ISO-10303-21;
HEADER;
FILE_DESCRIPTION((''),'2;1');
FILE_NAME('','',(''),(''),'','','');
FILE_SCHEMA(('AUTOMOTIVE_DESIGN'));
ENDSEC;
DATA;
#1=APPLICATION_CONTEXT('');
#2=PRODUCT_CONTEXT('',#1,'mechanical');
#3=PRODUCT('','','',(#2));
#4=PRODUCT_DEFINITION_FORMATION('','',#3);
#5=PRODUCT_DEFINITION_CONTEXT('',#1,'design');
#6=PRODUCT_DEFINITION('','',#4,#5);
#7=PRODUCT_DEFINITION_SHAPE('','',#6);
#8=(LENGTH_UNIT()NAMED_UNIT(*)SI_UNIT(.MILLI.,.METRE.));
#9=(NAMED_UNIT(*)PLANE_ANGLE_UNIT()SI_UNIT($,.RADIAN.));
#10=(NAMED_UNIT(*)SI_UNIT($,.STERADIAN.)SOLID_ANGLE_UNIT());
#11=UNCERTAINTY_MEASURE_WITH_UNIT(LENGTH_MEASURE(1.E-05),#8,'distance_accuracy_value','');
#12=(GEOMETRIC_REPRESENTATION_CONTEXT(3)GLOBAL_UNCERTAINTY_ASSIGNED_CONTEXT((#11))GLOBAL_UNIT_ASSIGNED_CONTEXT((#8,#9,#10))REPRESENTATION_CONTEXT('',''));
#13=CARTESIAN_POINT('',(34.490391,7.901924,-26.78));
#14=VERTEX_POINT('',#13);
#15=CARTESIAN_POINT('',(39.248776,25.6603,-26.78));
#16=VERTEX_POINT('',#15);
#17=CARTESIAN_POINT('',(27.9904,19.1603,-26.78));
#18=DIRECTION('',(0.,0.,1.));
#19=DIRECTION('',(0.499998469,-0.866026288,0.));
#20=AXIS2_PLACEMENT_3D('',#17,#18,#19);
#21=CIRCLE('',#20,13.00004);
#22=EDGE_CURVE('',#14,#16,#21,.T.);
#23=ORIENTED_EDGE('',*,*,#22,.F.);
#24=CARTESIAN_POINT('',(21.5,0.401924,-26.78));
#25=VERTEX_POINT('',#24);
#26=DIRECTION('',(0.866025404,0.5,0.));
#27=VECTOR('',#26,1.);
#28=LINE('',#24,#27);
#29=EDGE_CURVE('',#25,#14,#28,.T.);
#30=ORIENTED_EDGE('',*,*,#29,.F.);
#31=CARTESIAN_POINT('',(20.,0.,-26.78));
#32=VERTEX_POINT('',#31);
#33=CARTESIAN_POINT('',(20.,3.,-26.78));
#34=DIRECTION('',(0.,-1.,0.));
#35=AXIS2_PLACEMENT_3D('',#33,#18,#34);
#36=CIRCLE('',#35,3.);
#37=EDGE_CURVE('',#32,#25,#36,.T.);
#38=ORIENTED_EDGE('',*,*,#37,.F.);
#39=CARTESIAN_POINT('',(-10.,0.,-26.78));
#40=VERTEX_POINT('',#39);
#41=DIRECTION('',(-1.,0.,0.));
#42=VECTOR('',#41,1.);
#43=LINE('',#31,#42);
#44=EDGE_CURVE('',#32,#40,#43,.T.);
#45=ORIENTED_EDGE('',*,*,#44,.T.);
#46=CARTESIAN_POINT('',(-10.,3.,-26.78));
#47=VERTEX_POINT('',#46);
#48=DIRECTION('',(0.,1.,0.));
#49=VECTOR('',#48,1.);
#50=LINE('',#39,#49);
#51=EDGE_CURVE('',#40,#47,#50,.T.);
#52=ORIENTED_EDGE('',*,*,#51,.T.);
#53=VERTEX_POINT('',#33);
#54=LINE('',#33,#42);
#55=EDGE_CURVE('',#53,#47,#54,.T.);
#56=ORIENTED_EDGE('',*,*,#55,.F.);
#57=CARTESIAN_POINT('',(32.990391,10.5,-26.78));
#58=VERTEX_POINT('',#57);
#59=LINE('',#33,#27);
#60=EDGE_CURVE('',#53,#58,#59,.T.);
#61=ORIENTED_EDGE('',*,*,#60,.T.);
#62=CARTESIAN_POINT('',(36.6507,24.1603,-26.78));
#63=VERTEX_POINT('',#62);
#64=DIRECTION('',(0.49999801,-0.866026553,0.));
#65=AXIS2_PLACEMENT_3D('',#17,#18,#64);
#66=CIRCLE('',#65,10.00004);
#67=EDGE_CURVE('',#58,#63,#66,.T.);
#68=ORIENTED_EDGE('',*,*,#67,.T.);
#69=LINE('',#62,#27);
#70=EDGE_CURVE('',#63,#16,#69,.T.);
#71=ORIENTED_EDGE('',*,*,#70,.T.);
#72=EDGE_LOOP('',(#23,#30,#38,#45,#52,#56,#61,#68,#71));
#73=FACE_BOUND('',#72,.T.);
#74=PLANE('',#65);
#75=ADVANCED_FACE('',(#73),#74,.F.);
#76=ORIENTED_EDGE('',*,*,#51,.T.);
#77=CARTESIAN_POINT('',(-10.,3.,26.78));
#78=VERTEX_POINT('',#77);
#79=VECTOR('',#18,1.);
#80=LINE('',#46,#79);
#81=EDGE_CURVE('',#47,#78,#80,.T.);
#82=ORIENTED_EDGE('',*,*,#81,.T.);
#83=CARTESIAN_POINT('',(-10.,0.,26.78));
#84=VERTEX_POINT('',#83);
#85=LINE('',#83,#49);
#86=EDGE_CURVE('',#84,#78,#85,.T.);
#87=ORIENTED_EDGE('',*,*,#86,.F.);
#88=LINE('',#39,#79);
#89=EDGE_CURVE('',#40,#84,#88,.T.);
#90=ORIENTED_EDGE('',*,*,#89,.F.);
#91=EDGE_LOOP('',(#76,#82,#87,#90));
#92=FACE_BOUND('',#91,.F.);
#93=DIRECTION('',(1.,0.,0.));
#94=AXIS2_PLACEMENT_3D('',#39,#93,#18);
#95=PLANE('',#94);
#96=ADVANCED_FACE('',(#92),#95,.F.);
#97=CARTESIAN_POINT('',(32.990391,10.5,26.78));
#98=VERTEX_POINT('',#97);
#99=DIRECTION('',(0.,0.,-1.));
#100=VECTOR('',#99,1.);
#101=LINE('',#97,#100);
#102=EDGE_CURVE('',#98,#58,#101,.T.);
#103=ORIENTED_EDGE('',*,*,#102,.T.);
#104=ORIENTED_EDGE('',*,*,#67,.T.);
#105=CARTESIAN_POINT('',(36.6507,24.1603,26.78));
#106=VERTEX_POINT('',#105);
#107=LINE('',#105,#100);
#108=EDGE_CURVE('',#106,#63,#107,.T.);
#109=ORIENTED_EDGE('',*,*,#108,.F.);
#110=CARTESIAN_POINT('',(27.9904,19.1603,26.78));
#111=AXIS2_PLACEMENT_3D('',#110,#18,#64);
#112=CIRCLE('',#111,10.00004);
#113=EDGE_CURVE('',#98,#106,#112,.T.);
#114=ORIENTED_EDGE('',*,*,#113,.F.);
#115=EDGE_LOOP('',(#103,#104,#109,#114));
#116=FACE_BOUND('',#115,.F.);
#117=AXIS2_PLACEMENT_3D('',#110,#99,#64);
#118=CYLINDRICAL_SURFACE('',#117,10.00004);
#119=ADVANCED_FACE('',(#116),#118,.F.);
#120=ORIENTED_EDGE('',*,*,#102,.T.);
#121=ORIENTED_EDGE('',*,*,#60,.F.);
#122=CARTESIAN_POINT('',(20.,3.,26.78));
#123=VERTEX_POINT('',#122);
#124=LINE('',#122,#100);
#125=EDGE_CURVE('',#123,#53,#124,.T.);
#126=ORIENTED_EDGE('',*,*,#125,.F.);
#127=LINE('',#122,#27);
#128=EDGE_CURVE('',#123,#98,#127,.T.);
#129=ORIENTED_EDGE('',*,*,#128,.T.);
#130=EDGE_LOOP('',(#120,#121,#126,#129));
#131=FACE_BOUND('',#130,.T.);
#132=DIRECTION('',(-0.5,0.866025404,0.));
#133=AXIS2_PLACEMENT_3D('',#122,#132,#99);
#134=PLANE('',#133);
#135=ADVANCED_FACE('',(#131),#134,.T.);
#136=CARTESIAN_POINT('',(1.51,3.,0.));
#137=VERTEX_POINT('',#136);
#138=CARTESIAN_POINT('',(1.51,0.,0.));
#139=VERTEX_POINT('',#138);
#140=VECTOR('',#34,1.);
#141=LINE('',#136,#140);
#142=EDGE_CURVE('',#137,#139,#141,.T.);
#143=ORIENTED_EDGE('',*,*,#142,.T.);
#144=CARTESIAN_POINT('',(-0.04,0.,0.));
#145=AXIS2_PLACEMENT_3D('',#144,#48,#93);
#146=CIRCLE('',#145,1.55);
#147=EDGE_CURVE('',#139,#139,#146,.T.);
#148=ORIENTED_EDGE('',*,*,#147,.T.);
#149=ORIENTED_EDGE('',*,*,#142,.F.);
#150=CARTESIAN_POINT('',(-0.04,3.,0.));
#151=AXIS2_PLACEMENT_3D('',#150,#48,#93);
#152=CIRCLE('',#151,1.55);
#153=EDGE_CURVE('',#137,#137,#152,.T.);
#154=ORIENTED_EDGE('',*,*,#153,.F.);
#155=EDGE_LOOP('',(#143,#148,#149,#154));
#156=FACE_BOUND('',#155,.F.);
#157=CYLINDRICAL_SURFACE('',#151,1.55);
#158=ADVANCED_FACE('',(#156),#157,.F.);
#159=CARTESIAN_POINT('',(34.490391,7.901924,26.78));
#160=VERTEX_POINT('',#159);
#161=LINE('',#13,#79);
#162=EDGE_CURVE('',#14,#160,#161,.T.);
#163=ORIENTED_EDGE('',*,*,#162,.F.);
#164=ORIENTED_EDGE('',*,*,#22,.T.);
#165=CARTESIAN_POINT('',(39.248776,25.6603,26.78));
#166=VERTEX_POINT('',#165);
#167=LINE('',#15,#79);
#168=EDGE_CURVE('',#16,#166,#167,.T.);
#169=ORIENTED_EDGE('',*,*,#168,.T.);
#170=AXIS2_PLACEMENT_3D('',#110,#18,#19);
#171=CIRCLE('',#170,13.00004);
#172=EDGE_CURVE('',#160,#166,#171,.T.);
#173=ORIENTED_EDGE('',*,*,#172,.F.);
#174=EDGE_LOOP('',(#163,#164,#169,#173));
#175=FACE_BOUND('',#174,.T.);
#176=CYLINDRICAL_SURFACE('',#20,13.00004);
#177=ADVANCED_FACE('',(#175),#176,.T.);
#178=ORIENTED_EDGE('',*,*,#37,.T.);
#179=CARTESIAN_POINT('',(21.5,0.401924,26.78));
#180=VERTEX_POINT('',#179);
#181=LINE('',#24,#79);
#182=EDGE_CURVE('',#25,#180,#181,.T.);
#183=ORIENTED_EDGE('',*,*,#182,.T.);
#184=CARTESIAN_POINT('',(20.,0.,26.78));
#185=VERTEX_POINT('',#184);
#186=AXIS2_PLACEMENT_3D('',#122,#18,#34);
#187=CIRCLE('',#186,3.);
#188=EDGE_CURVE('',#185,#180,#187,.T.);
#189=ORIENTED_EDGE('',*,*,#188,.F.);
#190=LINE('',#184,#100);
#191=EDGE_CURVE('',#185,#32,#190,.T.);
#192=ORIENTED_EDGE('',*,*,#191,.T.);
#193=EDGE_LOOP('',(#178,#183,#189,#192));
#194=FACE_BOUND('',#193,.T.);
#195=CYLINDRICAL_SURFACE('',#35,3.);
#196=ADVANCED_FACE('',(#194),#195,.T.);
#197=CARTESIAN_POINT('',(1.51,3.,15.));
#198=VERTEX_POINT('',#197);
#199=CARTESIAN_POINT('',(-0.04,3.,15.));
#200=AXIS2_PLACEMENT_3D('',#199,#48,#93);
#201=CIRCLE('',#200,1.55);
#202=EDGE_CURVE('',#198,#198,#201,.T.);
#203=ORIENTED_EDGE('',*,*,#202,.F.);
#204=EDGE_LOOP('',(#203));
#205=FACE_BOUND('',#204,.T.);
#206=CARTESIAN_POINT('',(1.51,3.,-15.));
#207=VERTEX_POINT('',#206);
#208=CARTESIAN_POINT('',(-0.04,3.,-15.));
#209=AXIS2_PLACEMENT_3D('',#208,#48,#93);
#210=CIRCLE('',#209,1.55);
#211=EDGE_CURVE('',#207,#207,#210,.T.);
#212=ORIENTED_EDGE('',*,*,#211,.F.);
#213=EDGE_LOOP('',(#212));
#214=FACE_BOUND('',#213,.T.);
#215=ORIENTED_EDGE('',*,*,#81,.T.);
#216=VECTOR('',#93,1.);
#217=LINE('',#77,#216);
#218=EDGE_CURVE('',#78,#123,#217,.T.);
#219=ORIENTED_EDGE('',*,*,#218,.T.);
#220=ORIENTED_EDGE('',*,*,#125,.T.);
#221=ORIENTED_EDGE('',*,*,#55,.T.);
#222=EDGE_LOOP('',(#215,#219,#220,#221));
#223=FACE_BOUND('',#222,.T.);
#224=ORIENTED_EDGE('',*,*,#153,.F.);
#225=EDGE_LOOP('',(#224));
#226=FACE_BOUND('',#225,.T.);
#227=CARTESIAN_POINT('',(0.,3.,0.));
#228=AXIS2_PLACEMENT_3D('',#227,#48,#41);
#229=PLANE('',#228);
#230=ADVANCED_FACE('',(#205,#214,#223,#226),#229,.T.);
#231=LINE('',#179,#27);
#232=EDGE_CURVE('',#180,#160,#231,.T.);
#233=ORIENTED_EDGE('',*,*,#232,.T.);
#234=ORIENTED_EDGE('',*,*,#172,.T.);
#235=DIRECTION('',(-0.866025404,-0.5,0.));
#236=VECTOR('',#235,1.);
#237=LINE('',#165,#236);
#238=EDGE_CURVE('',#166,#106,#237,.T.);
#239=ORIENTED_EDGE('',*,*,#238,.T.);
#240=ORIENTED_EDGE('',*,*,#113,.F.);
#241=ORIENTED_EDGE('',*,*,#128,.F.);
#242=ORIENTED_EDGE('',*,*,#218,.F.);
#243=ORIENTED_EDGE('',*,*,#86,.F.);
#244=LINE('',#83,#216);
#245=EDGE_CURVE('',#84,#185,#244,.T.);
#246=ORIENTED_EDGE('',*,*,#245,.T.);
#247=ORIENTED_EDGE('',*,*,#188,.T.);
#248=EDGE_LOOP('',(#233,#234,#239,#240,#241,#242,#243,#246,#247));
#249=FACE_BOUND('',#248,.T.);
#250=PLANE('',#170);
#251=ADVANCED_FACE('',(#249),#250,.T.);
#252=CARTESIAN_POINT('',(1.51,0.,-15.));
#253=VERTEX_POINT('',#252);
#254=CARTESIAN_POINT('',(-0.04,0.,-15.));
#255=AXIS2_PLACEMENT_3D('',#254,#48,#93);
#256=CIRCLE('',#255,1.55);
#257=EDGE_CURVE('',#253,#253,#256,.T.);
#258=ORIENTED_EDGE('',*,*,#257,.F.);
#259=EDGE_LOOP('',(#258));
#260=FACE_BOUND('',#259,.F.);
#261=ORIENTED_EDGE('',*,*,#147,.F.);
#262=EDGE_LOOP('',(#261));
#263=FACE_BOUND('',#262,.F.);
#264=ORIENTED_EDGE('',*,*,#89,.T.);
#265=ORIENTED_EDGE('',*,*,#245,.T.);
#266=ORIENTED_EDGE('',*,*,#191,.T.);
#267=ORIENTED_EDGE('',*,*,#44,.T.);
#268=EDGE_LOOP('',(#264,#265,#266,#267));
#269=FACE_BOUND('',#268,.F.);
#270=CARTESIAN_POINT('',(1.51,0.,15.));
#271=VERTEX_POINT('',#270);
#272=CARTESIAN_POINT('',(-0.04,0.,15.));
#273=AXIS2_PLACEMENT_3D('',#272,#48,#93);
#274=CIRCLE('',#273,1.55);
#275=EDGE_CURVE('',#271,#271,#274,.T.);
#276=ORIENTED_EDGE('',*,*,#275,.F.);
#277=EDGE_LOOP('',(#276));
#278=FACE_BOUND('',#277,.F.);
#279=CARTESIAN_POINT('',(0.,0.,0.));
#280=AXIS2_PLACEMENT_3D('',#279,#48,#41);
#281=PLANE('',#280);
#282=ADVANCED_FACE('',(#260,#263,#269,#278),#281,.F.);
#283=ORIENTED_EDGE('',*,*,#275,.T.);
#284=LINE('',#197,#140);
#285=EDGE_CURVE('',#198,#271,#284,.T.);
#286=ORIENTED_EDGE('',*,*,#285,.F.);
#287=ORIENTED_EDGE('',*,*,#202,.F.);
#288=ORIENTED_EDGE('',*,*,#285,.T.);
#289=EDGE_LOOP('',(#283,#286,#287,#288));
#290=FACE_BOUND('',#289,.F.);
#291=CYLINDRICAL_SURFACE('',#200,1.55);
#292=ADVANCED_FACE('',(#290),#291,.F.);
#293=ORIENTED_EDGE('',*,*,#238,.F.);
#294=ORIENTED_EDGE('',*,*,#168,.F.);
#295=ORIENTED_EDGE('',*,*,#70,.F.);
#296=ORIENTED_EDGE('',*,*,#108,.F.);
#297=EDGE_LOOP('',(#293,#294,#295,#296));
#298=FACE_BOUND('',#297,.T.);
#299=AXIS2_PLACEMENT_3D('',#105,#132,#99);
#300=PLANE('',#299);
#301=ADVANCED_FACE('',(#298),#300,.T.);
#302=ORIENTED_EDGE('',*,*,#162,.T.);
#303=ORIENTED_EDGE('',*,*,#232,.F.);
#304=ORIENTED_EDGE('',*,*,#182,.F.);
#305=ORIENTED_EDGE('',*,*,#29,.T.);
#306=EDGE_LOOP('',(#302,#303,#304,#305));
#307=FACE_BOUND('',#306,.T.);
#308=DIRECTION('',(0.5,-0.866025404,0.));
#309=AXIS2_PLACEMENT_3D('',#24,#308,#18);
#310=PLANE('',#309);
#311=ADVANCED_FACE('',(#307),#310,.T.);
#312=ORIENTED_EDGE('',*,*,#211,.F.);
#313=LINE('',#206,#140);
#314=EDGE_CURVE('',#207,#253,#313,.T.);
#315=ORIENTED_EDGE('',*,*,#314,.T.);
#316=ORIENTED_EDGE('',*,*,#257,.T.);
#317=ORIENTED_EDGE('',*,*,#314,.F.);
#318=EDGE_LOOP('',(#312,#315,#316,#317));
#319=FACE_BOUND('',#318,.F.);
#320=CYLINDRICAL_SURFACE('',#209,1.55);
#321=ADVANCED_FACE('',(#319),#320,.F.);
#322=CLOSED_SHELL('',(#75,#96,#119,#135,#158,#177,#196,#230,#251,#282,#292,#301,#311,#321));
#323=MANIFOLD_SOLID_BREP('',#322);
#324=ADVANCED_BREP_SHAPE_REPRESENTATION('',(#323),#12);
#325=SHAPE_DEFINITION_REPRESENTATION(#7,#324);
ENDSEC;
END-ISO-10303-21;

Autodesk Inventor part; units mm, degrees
ref_plane "YZ Plane" through (0, 0, 0) normal (1, 0, 0) x (0, 1, 0)
ref_plane "XZ Plane" through (0, 0, 0) normal (0, 1, 0) x (-1, 0, 0)
ref_plane "XY Plane" through (0, 0, 0) normal (0, 0, 1) x (1, 0, 0)
sketch "Sketch1" plane through (0, 0, 0) normal (0, 1, 0) x (-1, 0, 0)
  line L0 (10, 26.78) -> (-20, 26.78)
  line L1 (-20, 26.78) -> (-20, -26.78)
  line L2 (-20, -26.78) -> (10, -26.78)
  line L3 (10, -26.78) -> (10, 26.78)
  point P0 (0, 0)
  dimension "d0" = 53.56
  dimension "d1" = 30
  dimension "d2" = 10
  dimension "d3" = 26.78
extrude "Extrusion1" add sketch "Sketch1" along normal blind 3
sketch "Sketch2" plane through (0, 3, 0) normal (0, 1, 0) x (1, 0, 0)
  circle A0 centre (-0.04, 0) radius 1.55
  line L0 (20, -26.78) -> (20, 26.78) projected
  circle A1 centre (-0.04, -15) radius 1.55
  circle A2 centre (-0.04, 15) radius 1.55
  point P0 (0, 0)
  point P1 (20, 0)
  dimension "d6" = 3.1
  dimension "d7" = 20.04
  dimension "d8" = 0
  dimension "d9" = 3.1
  dimension "d10" = 20.04
  dimension "d11" = 15
  dimension "d12" = 3.1
  dimension "d13" = 20.04
  dimension "d14" = 15
extrude "Extrusion2" cut sketch "Sketch2" against normal blind 3
sketch "Sketch3" plane through (0, 3, 0) normal (0, 1, 0) x (1, 0, 0)
  point P0 (0, 0)
sketch "Sketch4" plane through (20, 0, 26.78) normal (1, 0, 0) x (0, 0, -1)
  line L0 (0, 3) -> (53.56, 3)
  line L1 (53.56, 3) -> (53.56, 0)
  line L2 (53.56, 0) -> (0, 0)
  line L3 (0, 0) -> (0, 3)
  line L4 (0, 3) -> (53.56, 3) projected
  line L5 (0, 0) -> (0, 3) projected
  point P0 (26.78, 0)
  dimension "d17" = 3
  dimension "d18" = 53.56
  dimension "d19" = 0
  dimension "d20" = 0
revolve "Revolution2" add sketch "Sketch4" angle 30 about axis through (20, 3, 26.78) along (0, 0, 1)
sketch "Sketch6" plane through (20, 3, 26.78) normal (0.8660254, 0.5, 0) x (0, 0, -1)
  line L0 (0, 0) -> (53.56, 0)
  line L1 (53.56, 0) -> (53.56, -3)
  line L2 (53.56, -3) -> (0, -3)
  line L3 (0, -3) -> (0, 0)
  line L4 (0, 0) -> (53.56, 0) projected
  line L5 (0, 0) -> (0, -3) projected
  point P0 (26.78, 7.4019)
  dimension "d26" = 53.56
  dimension "d27" = 3
  dimension "d28" = 0
  dimension "d29" = 0
extrude "Extrusion3" add sketch "Sketch6" along normal blind 15
sketch "Sketch7" plane through (32.9904, 10.5, 26.78) normal (0.8660254, 0.5, 0) x (0, 0, -1)
  line L0 (0, 0) -> (53.56, 0)
  line L1 (53.56, 0) -> (53.56, -3)
  line L2 (53.56, -3) -> (0, -3)
  line L3 (0, -3) -> (0, 0)
  line L4 (0, -3) -> (53.56, -3) projected
  line L5 (0, 0) -> (0, -3) projected
  point P0 (26.78, 7.4019)
  dimension "d32" = 53.56
  dimension "d33" = 3
  dimension "d34" = 0
  dimension "d35" = 0
sketch "Sketch8" plane through (32.9904, 10.5, 26.78) normal (0.8660254, 0.5, 0) x (0, 0, -1)
  line L0 (-5.6464, 10) -> (58.6102, 10)
  line L1 (58.6102, 10) -> (58.6102, -7.2897)
  line L2 (58.6102, -7.2897) -> (-5.6464, -7.2897)
  line L3 (-5.6464, -7.2897) -> (-5.6464, 10)
  line L4 (53.56, 0) -> (0, 0) projected
  line L5 (53.56, -3) -> (53.56, 0) projected
  point P0 (26.78, 7.4019)
  dimension "d38" = 64.2566
  dimension "d39" = 17.2897
  dimension "d40" = 10
  dimension "d41" = 5.0502
revolve "Revolution4" add sketch "Sketch7" angle 90 about axis through (27.9904, 19.1603, 32.4264) along (0, 0, 1)
properties part number "gripper_frame"
